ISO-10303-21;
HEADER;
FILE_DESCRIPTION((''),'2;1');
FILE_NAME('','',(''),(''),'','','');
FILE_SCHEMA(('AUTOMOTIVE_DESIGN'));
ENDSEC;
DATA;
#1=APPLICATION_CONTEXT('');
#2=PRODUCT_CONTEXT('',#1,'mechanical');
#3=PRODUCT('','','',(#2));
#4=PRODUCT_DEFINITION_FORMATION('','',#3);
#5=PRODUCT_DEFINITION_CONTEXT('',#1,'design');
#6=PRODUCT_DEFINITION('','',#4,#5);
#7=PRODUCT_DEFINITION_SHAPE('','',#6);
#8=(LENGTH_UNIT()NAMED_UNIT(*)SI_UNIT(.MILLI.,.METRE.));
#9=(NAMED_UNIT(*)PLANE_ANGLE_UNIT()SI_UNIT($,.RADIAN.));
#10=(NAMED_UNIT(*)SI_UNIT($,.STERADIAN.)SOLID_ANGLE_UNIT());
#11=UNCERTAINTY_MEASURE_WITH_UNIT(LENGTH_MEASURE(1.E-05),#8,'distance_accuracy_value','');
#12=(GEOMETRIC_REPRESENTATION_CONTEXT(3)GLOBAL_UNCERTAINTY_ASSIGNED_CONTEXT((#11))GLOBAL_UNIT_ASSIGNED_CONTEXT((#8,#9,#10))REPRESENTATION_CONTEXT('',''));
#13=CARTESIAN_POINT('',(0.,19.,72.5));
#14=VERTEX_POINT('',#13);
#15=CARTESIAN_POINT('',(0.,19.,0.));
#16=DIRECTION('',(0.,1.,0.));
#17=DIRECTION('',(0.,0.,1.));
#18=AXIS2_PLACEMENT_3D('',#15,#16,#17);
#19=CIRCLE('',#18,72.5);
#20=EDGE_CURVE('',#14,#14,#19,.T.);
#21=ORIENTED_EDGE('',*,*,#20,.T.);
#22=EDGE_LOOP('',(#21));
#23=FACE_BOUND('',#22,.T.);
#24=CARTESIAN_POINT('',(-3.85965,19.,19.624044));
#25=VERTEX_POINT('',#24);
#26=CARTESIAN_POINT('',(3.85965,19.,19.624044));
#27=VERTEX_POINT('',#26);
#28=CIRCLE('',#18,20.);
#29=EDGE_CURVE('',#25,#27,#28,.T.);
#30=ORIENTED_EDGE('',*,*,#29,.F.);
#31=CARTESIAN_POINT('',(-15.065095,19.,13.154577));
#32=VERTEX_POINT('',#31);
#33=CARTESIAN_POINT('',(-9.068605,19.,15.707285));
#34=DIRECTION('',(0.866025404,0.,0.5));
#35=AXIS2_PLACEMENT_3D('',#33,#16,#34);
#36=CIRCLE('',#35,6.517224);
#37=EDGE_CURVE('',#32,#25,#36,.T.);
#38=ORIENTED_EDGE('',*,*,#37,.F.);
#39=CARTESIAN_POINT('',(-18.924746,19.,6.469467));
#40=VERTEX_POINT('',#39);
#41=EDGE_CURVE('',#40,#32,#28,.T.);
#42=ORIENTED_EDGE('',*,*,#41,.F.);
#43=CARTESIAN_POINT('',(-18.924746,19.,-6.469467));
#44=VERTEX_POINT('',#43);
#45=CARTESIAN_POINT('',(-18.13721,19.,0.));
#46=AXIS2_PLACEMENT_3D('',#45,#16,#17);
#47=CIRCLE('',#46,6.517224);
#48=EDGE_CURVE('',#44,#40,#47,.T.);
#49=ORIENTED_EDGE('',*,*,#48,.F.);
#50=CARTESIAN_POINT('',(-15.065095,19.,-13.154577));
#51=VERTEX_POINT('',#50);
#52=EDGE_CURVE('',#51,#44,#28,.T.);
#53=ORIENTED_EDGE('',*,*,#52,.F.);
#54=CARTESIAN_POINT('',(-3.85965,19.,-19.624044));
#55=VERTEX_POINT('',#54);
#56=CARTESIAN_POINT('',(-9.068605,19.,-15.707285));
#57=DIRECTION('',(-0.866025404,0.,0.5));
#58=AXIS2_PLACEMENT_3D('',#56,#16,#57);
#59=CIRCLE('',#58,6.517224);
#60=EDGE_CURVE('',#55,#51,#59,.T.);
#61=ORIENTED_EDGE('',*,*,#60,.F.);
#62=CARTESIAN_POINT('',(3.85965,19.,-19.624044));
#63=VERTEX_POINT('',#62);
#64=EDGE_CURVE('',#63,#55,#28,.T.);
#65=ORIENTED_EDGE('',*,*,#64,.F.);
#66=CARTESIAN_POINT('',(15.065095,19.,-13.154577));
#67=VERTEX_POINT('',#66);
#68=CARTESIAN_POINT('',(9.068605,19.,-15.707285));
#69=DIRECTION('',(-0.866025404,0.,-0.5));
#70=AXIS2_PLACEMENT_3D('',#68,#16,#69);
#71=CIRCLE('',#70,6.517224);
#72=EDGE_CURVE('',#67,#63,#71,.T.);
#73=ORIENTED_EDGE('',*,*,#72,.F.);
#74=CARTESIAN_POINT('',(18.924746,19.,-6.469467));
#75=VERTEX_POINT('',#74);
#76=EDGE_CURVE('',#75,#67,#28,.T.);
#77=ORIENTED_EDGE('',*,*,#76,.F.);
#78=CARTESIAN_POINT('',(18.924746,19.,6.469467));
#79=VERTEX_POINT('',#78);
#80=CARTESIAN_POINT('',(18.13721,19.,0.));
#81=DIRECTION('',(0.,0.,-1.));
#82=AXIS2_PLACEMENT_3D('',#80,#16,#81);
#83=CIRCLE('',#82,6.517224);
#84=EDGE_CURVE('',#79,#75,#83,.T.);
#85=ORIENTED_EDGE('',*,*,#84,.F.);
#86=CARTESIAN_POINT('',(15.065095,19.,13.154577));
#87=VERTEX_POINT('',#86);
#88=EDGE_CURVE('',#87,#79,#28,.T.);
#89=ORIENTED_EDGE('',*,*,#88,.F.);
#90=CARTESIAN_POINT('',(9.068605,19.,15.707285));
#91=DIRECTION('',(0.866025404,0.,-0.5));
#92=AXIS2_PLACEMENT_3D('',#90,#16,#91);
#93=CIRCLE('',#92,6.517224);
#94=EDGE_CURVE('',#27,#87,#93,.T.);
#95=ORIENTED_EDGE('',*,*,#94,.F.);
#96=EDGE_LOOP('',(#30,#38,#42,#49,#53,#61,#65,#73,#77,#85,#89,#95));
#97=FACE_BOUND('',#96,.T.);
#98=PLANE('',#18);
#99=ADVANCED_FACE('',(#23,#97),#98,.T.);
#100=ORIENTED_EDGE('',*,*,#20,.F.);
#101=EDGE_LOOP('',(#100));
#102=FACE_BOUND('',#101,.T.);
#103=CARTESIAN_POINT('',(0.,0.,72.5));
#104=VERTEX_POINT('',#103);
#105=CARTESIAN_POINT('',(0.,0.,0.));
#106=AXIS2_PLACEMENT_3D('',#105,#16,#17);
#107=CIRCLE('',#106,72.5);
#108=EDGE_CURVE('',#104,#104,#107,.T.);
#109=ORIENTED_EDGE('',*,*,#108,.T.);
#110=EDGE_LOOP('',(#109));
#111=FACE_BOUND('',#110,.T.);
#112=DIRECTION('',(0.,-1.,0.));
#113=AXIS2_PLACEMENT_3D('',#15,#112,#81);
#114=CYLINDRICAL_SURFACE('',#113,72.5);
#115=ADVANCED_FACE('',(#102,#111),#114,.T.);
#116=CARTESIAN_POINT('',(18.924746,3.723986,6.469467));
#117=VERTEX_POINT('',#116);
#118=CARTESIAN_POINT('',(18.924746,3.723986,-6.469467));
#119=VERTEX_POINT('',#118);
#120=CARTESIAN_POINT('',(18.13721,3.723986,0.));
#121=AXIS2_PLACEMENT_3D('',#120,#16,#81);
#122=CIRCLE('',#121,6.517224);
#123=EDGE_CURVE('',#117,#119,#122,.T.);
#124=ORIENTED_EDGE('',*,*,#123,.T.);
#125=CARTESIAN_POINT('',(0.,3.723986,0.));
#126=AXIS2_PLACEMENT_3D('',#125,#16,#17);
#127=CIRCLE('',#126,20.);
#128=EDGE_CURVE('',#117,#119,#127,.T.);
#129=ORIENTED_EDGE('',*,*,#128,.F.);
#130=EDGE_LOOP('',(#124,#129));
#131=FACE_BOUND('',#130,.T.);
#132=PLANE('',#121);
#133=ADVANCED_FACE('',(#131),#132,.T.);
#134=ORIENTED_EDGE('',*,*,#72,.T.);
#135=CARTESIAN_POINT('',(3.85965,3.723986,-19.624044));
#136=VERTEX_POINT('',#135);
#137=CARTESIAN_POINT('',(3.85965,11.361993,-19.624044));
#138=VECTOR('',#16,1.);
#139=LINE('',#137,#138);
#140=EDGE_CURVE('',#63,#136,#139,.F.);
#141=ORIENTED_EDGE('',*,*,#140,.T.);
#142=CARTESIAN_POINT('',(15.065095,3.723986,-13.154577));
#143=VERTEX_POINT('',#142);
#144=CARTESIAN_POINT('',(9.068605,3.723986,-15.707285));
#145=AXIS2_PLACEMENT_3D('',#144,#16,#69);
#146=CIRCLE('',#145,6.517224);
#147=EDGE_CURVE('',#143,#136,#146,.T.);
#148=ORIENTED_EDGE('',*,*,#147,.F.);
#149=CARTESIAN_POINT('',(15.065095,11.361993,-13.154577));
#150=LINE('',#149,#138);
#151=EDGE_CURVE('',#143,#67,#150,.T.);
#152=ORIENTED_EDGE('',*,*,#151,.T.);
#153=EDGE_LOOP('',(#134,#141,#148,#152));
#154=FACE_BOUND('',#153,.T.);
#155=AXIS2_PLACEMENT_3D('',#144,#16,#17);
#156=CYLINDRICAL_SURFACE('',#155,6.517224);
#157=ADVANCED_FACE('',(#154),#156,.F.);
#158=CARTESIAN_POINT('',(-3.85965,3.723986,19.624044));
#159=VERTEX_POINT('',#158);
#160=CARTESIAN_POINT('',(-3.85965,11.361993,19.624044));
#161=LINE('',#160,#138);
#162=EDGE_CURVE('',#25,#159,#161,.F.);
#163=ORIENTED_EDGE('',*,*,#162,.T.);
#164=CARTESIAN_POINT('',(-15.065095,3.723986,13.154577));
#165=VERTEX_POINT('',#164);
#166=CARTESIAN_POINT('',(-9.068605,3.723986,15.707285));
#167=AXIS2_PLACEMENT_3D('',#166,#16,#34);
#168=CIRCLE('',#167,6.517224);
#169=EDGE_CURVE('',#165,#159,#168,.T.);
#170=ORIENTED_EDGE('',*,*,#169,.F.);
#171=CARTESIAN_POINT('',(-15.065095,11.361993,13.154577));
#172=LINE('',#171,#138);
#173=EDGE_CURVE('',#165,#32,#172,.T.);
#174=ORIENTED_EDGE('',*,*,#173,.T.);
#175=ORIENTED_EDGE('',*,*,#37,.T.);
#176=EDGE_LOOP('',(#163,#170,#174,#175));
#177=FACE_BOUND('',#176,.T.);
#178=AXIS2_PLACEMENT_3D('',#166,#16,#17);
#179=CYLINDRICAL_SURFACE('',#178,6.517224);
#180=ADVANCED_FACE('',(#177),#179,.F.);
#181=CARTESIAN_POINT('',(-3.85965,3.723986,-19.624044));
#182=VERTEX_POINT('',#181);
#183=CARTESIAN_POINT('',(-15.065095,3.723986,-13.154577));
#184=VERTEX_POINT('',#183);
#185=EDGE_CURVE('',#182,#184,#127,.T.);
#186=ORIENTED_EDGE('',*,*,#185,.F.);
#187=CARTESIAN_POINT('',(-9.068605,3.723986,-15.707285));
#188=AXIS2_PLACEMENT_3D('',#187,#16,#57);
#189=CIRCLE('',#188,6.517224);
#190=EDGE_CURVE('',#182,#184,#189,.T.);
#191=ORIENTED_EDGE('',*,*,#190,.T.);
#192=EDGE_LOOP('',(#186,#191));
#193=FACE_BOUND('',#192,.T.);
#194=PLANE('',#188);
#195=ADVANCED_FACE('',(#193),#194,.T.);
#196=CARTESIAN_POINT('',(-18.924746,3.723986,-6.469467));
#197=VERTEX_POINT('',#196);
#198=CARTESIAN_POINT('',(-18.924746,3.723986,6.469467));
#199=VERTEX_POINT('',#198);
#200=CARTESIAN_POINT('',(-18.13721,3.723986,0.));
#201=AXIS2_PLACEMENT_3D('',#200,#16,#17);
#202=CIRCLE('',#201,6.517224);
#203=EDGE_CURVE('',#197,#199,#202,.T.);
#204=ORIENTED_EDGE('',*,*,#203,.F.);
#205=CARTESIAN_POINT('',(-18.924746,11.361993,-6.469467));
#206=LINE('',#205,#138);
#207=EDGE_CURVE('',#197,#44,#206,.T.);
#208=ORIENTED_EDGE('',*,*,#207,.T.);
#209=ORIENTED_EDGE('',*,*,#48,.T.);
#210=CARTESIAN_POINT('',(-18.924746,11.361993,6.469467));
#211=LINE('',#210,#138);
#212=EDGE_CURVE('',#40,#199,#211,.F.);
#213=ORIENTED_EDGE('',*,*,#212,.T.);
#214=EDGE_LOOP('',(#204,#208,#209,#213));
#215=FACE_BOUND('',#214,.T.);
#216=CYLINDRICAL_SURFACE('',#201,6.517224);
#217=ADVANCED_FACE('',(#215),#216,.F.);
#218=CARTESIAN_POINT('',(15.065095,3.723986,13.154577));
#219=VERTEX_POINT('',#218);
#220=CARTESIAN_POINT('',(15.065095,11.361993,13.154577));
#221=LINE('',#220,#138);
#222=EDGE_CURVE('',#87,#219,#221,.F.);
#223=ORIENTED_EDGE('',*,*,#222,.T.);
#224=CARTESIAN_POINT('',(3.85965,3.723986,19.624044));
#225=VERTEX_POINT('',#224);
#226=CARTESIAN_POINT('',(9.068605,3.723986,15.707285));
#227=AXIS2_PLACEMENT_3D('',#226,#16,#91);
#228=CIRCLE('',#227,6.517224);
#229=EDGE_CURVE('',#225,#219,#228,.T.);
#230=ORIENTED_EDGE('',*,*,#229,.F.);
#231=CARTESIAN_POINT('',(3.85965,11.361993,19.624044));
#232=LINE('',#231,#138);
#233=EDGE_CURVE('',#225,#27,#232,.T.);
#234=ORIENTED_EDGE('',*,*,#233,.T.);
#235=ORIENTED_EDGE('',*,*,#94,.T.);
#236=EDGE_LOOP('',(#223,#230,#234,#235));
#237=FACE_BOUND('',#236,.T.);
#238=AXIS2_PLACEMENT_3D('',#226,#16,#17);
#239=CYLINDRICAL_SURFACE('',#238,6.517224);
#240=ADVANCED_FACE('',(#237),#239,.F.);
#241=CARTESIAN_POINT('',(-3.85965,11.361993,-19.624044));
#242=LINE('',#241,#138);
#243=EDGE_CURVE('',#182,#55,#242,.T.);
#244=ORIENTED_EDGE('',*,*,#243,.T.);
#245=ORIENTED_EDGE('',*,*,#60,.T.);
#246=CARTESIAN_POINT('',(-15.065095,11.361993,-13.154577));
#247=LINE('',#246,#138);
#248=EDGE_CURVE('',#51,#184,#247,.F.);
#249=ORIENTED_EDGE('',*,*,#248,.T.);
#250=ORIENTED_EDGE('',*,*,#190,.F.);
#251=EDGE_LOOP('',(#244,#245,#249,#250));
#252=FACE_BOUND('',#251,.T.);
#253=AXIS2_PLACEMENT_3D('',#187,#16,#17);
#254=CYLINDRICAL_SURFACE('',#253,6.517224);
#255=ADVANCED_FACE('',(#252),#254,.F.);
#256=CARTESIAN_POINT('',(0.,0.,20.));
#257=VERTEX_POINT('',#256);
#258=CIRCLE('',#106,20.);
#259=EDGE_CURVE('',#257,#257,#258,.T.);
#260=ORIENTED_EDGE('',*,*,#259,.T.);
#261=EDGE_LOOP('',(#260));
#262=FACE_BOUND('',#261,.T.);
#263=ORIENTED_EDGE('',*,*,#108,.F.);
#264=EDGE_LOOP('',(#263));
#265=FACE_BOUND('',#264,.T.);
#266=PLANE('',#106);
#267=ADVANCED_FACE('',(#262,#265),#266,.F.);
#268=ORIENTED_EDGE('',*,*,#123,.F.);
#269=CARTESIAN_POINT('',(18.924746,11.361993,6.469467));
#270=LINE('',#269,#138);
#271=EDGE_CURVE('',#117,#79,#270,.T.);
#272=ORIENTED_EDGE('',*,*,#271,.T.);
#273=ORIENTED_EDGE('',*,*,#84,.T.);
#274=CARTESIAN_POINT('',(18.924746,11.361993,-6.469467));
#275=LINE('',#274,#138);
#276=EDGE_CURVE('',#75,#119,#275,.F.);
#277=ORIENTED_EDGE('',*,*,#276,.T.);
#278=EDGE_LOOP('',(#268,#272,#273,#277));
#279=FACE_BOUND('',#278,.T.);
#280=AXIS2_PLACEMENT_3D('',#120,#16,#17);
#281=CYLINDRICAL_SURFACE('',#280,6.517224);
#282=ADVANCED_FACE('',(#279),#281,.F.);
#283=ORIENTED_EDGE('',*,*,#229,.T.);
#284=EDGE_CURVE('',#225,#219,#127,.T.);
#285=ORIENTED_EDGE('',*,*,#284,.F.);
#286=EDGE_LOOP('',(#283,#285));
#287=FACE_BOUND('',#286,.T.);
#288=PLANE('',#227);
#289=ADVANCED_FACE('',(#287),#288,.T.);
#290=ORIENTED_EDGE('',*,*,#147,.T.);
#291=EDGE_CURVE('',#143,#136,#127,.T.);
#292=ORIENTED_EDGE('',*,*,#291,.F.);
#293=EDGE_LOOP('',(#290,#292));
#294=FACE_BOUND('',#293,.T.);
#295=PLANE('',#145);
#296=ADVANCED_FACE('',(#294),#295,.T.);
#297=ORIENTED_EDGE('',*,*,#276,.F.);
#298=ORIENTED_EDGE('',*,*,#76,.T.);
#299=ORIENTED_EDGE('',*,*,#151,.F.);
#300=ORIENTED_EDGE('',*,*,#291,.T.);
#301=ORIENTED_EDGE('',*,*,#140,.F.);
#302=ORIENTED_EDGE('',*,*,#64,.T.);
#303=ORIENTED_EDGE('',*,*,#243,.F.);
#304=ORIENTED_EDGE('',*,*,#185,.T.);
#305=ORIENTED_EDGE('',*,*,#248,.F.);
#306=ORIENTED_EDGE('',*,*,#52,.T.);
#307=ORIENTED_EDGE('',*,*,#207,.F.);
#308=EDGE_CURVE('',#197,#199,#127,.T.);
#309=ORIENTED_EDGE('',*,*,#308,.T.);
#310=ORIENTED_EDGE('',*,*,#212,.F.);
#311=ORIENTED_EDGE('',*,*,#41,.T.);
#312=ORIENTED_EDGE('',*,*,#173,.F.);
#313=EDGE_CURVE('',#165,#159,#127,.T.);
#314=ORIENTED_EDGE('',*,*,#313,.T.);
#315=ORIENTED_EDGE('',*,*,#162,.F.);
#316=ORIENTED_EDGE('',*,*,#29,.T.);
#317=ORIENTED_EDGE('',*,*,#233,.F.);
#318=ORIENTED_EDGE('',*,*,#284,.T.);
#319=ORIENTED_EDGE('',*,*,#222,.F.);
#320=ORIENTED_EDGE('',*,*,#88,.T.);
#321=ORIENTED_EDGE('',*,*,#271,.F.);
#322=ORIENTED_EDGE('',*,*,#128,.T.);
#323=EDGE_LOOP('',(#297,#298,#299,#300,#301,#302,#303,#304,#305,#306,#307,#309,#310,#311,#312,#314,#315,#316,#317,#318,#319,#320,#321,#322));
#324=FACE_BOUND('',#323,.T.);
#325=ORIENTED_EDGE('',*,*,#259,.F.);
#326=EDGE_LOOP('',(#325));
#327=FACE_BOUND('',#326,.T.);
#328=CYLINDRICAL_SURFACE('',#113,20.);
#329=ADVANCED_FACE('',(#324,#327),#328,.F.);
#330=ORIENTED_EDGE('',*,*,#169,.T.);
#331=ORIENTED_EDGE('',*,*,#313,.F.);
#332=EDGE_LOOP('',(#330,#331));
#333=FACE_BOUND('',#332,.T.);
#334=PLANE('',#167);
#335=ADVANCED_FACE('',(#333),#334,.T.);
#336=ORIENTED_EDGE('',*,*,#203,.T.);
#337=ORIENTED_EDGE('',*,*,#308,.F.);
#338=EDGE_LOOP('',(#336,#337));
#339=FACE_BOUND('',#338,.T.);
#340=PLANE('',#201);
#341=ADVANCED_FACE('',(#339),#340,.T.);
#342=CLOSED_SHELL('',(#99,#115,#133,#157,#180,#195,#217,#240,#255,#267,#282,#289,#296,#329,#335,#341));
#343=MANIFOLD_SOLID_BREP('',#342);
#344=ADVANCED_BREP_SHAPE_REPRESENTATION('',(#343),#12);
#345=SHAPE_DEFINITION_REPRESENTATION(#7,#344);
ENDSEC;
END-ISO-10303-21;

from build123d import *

# Parameters (mm, degrees)
SKETCH1_R           = 72.5
BOSS_EXTRUDE1_DEPTH = 19
SKETCH2_R           = 20
CUT_EXTRUDE1_DEPTH  = 105.276075876
SKETCH3_R           = 6.517224347
CUT_EXTRUDE2_DEPTH  = 15.27601445
CIRPATTERN1_COUNT   = 6


with BuildPart() as part:
    # Sketch1 → Boss-Extrude1 (new body)
    with BuildSketch(Plane(origin=(0, 0, 0), x_dir=(1, 0, 0), z_dir=(0, 1, 0))):
        Circle(SKETCH1_R)
    extrude(amount=BOSS_EXTRUDE1_DEPTH)

    # Sketch2 → Cut-Extrude1 (cut, through all)
    with BuildSketch(Plane(origin=(0, 0, 0), x_dir=(1, 0, 0), z_dir=(0, 1, 0))):
        Circle(SKETCH2_R)
    extrude(amount=CUT_EXTRUDE1_DEPTH, mode=Mode.SUBTRACT)

    # Sketch3 → Cut-Extrude2 (cut)
    with BuildSketch(Plane(origin=(0, 19, 0), x_dir=(1, 0, 0), z_dir=(0, 1, 0))):
        with Locations((-18.137210473, 0)):
            Circle(SKETCH3_R)
    cut_extrude2 = extrude(amount=-CUT_EXTRUDE2_DEPTH, mode=Mode.SUBTRACT)

    # CirPattern1: Cut-Extrude2 ×6 about axis
    cirpattern1_axis = Axis((0, 0, 0), (0, 1, 0))
    for i in range(1, CIRPATTERN1_COUNT):
        add(cut_extrude2.rotate(cirpattern1_axis, i * 360 / CIRPATTERN1_COUNT), mode=Mode.SUBTRACT)


solid = part.part
